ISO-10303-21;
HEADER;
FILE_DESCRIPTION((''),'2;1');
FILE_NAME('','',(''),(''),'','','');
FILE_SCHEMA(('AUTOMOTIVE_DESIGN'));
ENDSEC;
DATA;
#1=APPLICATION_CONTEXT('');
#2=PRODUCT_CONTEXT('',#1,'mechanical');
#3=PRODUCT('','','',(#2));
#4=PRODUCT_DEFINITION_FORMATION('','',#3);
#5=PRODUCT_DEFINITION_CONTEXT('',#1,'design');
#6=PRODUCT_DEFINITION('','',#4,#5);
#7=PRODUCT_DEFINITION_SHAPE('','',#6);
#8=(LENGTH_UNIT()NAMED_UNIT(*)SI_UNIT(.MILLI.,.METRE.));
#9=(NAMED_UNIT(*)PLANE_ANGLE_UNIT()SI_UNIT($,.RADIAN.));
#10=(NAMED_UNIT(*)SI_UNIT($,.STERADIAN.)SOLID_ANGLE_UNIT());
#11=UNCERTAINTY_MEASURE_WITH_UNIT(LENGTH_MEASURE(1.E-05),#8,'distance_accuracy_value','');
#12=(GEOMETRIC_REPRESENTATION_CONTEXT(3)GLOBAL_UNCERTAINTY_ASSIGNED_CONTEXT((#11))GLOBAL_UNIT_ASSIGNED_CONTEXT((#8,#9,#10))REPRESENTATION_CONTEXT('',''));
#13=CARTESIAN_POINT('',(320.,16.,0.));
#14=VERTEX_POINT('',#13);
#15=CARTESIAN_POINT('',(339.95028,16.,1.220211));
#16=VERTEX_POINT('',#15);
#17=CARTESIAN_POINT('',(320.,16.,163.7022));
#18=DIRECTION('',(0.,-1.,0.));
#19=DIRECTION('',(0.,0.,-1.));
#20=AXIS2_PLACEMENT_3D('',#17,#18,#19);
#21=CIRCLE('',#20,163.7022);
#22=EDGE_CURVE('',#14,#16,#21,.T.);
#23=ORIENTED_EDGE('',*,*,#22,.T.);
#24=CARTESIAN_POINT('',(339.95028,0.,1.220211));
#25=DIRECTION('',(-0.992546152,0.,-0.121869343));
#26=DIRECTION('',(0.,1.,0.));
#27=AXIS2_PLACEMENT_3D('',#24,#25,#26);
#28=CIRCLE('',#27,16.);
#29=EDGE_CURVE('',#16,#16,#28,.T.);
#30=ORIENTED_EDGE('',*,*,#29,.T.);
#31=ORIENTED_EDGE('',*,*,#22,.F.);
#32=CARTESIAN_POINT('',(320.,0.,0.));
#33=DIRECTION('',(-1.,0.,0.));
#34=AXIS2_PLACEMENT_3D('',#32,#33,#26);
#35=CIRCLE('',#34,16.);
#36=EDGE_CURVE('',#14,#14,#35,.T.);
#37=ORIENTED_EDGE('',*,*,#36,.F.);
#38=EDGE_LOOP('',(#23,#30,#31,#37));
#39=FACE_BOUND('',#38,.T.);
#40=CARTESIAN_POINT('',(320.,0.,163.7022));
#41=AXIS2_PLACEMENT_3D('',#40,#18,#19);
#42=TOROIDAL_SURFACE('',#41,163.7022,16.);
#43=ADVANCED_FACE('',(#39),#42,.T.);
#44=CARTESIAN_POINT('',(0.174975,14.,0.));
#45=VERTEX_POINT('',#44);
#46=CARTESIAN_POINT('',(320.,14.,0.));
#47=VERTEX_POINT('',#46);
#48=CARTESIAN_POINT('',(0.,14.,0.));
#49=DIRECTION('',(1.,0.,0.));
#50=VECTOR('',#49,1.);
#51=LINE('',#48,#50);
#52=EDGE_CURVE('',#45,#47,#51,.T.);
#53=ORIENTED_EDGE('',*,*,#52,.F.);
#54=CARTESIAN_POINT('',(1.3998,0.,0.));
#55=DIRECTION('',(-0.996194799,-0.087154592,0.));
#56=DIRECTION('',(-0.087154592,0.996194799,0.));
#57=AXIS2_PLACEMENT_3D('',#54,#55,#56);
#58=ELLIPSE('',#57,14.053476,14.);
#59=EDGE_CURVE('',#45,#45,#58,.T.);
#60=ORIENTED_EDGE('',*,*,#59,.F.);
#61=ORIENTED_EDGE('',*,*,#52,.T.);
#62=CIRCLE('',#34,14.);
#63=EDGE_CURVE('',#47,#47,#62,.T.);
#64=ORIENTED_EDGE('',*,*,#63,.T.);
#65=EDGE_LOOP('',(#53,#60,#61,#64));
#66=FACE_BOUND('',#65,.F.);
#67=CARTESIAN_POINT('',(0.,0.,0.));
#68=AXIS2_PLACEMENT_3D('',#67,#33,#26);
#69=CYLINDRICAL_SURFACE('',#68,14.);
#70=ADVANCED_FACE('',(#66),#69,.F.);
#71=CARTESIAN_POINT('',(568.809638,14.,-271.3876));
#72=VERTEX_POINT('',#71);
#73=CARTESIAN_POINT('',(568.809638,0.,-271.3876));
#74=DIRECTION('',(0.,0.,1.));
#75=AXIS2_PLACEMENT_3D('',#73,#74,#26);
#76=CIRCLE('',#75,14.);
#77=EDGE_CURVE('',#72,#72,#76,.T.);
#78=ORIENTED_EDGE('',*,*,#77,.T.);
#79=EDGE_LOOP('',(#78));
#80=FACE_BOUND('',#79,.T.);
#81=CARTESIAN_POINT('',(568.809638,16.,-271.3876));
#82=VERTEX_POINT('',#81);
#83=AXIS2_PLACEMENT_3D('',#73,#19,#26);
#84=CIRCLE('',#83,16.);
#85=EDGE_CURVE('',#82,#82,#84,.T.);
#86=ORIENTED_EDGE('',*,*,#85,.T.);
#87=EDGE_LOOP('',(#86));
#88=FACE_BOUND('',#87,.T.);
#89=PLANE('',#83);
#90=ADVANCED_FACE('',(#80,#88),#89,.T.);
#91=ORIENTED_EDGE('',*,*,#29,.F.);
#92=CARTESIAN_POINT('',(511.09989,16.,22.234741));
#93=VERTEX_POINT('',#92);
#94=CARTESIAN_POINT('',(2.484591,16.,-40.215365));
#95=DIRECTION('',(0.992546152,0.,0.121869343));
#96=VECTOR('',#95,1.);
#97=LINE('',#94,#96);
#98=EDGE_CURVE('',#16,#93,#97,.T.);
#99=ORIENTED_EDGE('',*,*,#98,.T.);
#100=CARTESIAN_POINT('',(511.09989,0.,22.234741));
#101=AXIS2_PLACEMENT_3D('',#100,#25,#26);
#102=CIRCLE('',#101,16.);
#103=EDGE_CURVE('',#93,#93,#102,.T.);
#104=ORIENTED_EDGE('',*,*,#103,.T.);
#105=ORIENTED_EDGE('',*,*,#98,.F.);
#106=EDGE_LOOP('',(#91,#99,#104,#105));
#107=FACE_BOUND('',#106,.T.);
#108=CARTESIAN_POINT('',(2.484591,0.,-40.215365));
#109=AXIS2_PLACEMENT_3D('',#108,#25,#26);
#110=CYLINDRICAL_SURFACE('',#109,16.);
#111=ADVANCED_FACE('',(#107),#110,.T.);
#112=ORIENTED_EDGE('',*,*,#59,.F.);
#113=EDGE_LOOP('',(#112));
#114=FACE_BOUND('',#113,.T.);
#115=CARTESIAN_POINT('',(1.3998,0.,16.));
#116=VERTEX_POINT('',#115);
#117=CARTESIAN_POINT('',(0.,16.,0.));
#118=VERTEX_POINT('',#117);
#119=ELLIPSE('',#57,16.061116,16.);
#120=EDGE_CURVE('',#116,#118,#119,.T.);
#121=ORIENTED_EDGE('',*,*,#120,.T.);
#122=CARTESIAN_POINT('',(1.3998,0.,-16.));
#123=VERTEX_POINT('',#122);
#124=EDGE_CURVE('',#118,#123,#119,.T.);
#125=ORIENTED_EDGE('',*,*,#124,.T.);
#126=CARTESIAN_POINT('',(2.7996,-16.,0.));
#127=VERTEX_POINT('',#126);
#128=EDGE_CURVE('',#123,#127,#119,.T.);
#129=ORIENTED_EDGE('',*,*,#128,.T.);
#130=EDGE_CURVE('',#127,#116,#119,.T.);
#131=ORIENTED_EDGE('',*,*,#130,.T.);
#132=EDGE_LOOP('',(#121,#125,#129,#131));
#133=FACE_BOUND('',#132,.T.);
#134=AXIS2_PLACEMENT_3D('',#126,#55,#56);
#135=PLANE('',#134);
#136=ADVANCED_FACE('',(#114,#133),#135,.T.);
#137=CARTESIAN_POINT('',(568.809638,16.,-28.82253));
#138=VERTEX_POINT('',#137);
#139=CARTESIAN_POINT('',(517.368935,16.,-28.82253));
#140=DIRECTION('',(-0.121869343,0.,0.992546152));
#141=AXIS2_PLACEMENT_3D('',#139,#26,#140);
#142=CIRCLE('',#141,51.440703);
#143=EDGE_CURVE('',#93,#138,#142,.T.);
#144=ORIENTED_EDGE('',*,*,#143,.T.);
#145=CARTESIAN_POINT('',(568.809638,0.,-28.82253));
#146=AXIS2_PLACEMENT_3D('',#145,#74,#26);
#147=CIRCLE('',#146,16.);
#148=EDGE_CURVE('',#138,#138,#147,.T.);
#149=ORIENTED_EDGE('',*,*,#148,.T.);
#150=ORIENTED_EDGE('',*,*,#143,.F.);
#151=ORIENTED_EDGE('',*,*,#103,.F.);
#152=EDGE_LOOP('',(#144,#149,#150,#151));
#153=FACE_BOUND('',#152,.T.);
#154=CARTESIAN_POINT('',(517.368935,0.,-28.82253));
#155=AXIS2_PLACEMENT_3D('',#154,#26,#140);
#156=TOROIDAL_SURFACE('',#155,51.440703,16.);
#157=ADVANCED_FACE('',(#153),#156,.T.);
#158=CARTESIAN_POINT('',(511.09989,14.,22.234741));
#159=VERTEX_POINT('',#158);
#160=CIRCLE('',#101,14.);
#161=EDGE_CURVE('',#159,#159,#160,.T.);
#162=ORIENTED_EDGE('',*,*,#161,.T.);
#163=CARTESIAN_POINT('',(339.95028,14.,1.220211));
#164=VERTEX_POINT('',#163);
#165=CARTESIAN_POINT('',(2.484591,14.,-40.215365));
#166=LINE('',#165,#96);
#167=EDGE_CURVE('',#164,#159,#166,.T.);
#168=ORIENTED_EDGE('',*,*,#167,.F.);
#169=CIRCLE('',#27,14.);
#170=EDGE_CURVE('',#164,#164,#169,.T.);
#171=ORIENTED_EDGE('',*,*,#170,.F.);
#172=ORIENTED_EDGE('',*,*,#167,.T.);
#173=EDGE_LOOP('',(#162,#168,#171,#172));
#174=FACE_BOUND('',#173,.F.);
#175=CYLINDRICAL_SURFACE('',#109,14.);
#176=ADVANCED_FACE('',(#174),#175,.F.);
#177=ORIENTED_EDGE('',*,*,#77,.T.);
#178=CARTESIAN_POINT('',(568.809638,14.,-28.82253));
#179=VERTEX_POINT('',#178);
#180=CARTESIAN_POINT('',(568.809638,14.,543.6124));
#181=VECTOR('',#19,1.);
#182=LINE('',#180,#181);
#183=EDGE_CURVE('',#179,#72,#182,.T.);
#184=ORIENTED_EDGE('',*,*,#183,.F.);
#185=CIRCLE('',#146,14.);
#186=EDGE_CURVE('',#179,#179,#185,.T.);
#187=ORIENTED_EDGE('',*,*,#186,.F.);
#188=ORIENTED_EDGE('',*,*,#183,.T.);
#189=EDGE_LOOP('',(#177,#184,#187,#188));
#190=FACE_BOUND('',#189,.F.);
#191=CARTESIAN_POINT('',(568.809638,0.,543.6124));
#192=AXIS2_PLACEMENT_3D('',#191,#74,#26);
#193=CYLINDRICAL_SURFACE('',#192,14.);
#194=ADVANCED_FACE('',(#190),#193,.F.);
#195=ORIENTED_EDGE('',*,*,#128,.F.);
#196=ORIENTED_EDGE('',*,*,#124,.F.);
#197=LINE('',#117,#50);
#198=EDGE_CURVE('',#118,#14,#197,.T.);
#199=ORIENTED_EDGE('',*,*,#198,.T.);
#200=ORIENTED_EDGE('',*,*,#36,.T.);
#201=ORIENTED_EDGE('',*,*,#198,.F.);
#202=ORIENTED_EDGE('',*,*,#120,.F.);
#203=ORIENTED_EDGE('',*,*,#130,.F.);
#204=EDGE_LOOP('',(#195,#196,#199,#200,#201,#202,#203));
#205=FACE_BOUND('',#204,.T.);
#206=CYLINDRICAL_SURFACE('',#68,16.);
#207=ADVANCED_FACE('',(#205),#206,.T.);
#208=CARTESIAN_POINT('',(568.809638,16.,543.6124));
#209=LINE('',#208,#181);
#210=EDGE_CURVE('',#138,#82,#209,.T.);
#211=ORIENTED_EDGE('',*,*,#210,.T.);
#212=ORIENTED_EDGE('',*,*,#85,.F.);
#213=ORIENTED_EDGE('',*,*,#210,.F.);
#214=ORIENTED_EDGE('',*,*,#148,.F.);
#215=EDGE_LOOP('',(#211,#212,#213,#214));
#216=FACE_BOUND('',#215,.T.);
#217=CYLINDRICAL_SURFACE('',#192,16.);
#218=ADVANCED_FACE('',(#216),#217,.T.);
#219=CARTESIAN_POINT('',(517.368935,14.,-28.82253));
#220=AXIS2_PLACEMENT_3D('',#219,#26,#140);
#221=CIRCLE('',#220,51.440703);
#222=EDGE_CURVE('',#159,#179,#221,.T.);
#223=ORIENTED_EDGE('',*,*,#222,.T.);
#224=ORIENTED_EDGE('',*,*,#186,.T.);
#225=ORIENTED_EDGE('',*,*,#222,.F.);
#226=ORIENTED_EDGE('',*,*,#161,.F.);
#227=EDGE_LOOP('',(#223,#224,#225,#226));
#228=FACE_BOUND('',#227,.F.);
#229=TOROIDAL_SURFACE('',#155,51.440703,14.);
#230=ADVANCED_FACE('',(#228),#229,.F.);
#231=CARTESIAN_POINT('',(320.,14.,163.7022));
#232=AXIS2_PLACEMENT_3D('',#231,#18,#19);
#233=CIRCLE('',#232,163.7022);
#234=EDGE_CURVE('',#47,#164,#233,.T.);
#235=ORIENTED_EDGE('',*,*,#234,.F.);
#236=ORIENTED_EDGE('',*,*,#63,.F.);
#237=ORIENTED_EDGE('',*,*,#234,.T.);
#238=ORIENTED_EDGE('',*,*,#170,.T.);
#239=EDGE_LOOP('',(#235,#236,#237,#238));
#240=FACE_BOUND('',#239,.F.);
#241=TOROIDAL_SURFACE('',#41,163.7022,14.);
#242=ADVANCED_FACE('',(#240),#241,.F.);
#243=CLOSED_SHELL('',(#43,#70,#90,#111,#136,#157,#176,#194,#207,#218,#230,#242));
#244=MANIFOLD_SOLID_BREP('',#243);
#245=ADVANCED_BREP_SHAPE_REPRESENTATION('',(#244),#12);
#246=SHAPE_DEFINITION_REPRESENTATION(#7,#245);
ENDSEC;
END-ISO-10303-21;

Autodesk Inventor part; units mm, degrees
ref_plane "YZ Plane" through (0, 0, 0) normal (1, 0, 0) x (0, 1, 0)
ref_plane "XZ Plane" through (0, 0, 0) normal (0, 1, 0) x (-1, 0, 0)
sketch "Szkic1" plane through (0, 0, 0) normal (1, 0, 0) x (0, 1, 0)
  circle A0 centre (0, 0) radius 16
  dimension "d0" = 32
extrude "Wyciągnięcie proste1" add sketch "Szkic1" along normal blind 815
shell "Skorupa1" thickness 2 removed faces 2 at (815, 4.7224, 2.4785) at (0, 4.7224, 2.4785)
sketch "Szkic4" plane through (0, 0, 0) normal (0, 0, 1) x (1, 0, 0)
  line L0 (320, 29.1092) -> (320, -35.5658)
  line L1 (0, 16) -> (0, -16) projected
  point P0 (0, 0)
  dimension "d8" = 320
bend part "Gięcie części1" radius 163.7022 angle 7 line through (320, 29.1092, 0) along (0, -1, 0) centre toward (0, 0, 1) moving side (1, 0, 0) both sides no
sketch "Szkic7" plane through (811.4097, 0, 59.1081) normal (0.9925462, 0, 0.1218693) x (0.1218693, 0, -0.9925462)
  circle A0 centre (0, 0) radius 14 projected
  circle A1 centre (0, 0) radius 16 projected
  point P0 (-40.2184, 0)
  point P1 (16, 0)
ref_plane "Płaszczyzna konstrukcyjna4" through (813.3596, 0, 43.2274) normal (0.1218693, 0, -0.9925462) x (0, 1, 0)
sketch "Szkic8" plane through (813.3596, 0, 43.2274) normal (0.1218693, 0, -0.9925462) x (0, 1, 0)
  line L0 (-19.5179, -302.5651) -> (38.9, -302.5651)
  ellipse E0 centre (0, -812.5651) end of major axis (-16, -812.5651) minor radius 1.9499 projected
  dimension "d15" = 510
bend part "Gięcie części2" radius 35.4407 angle 97 line through (513.0498, -19.5179, 6.354) along (0, 1, 0) centre toward (0.1218693, 0, -0.9925462) moving side (0.9925462, 0, 0.1218693) both sides no
sketch "Szkic10" plane through (0, 0, 0) normal (0, 0, 1) x (1, 0, 0)
  line L0 (0, 16) -> (0, -16) construction
  line L1 (0, -16) -> (320, -16) construction
  line L2 (0, 16) -> (0, -16)
  line L3 (0, -16) -> (2.7996, -16)
  line L4 (2.7996, -16) -> (0, 16)
  point P0 (0, 0)
  dimension "d22" = 5
extrude "Wyciągnięcie proste4" cut sketch "Szkic10" along normal mid plane 32
equation "\"PromieńGięcia\" = Grubość"
equation "\"SzerokośćGięciaPodcięcia\" = Grubość"
equation "\"GłębokośćGięciaPodcięcia\" = 0.5 * Grubość"
equation "\"RozmiarPodcięciaNarożnika\" = 4 * Grubość"
equation "\"MinimalnaPozostałość\" = 2 * Grubość"
equation "\"PromieńPrzejścia\" = PromieńGięcia"
equation "\"Rozmiar_promienia_Jacobiego\" = Grubość"
equation "\"Wielk_odstępu\" = Grubość"
equation "\"Grubość\" = 0.5"
properties part number "Rura_podłużna_ergosiedziska_lewa" material "Aluminium AW-7020"
